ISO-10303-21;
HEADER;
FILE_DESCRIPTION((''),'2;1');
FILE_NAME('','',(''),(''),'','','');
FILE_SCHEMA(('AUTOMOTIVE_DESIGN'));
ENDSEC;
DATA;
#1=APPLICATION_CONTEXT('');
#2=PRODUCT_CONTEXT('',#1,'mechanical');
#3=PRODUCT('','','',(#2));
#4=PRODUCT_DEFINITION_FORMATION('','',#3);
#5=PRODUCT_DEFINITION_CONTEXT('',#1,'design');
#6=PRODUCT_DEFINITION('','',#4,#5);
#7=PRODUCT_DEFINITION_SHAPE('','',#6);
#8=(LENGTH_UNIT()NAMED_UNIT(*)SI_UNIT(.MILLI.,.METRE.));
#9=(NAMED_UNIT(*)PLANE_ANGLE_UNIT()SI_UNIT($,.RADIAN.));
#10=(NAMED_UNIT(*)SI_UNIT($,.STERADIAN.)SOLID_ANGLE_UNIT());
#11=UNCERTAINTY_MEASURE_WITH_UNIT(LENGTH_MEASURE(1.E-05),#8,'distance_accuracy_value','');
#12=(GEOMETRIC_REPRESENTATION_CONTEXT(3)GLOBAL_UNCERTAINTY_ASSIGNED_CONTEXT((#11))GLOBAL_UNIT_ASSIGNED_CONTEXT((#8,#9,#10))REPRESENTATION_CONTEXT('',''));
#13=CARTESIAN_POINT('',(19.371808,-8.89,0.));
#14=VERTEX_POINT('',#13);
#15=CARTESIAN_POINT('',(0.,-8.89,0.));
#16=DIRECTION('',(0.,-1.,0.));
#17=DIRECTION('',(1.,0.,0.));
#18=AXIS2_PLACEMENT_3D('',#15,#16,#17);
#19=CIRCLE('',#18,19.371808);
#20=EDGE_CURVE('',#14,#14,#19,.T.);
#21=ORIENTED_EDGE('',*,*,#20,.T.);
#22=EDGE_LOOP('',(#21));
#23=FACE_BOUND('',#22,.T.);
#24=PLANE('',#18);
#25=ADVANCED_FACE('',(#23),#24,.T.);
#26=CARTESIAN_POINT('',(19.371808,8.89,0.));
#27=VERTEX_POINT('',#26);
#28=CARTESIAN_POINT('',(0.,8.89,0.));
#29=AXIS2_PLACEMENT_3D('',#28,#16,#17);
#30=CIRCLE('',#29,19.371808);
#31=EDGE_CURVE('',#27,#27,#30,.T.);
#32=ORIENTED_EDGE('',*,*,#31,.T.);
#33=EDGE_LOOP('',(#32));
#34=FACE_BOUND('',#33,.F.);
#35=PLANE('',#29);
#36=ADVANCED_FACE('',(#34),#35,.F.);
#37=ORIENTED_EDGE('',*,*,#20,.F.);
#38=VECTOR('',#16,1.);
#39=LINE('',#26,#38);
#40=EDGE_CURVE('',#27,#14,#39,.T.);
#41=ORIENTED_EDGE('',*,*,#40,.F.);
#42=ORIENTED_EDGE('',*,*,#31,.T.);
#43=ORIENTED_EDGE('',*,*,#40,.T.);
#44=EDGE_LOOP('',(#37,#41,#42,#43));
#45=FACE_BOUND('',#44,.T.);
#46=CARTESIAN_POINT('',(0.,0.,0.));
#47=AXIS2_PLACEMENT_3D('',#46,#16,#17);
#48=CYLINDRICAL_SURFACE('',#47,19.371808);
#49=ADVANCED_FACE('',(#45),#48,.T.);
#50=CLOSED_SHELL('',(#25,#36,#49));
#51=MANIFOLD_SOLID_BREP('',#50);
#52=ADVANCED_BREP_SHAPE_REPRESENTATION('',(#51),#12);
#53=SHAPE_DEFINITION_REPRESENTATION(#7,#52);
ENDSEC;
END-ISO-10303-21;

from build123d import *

# Parameters (mm, degrees)
F2_R     = 19.3718075752
F4_DEPTH = 8.89


# Not quite as in the source:
# - the program builds the solid bodies; features that only make, move or delete a surface that nothing else refers to are left out


with BuildPart() as f4:
    # F2 (on face) → F4 (new body, symmetric)
    with BuildSketch(Plane.XZ):
        Circle(F2_R)
    extrude(amount=F4_DEPTH, both=True)


solid = f4.part
